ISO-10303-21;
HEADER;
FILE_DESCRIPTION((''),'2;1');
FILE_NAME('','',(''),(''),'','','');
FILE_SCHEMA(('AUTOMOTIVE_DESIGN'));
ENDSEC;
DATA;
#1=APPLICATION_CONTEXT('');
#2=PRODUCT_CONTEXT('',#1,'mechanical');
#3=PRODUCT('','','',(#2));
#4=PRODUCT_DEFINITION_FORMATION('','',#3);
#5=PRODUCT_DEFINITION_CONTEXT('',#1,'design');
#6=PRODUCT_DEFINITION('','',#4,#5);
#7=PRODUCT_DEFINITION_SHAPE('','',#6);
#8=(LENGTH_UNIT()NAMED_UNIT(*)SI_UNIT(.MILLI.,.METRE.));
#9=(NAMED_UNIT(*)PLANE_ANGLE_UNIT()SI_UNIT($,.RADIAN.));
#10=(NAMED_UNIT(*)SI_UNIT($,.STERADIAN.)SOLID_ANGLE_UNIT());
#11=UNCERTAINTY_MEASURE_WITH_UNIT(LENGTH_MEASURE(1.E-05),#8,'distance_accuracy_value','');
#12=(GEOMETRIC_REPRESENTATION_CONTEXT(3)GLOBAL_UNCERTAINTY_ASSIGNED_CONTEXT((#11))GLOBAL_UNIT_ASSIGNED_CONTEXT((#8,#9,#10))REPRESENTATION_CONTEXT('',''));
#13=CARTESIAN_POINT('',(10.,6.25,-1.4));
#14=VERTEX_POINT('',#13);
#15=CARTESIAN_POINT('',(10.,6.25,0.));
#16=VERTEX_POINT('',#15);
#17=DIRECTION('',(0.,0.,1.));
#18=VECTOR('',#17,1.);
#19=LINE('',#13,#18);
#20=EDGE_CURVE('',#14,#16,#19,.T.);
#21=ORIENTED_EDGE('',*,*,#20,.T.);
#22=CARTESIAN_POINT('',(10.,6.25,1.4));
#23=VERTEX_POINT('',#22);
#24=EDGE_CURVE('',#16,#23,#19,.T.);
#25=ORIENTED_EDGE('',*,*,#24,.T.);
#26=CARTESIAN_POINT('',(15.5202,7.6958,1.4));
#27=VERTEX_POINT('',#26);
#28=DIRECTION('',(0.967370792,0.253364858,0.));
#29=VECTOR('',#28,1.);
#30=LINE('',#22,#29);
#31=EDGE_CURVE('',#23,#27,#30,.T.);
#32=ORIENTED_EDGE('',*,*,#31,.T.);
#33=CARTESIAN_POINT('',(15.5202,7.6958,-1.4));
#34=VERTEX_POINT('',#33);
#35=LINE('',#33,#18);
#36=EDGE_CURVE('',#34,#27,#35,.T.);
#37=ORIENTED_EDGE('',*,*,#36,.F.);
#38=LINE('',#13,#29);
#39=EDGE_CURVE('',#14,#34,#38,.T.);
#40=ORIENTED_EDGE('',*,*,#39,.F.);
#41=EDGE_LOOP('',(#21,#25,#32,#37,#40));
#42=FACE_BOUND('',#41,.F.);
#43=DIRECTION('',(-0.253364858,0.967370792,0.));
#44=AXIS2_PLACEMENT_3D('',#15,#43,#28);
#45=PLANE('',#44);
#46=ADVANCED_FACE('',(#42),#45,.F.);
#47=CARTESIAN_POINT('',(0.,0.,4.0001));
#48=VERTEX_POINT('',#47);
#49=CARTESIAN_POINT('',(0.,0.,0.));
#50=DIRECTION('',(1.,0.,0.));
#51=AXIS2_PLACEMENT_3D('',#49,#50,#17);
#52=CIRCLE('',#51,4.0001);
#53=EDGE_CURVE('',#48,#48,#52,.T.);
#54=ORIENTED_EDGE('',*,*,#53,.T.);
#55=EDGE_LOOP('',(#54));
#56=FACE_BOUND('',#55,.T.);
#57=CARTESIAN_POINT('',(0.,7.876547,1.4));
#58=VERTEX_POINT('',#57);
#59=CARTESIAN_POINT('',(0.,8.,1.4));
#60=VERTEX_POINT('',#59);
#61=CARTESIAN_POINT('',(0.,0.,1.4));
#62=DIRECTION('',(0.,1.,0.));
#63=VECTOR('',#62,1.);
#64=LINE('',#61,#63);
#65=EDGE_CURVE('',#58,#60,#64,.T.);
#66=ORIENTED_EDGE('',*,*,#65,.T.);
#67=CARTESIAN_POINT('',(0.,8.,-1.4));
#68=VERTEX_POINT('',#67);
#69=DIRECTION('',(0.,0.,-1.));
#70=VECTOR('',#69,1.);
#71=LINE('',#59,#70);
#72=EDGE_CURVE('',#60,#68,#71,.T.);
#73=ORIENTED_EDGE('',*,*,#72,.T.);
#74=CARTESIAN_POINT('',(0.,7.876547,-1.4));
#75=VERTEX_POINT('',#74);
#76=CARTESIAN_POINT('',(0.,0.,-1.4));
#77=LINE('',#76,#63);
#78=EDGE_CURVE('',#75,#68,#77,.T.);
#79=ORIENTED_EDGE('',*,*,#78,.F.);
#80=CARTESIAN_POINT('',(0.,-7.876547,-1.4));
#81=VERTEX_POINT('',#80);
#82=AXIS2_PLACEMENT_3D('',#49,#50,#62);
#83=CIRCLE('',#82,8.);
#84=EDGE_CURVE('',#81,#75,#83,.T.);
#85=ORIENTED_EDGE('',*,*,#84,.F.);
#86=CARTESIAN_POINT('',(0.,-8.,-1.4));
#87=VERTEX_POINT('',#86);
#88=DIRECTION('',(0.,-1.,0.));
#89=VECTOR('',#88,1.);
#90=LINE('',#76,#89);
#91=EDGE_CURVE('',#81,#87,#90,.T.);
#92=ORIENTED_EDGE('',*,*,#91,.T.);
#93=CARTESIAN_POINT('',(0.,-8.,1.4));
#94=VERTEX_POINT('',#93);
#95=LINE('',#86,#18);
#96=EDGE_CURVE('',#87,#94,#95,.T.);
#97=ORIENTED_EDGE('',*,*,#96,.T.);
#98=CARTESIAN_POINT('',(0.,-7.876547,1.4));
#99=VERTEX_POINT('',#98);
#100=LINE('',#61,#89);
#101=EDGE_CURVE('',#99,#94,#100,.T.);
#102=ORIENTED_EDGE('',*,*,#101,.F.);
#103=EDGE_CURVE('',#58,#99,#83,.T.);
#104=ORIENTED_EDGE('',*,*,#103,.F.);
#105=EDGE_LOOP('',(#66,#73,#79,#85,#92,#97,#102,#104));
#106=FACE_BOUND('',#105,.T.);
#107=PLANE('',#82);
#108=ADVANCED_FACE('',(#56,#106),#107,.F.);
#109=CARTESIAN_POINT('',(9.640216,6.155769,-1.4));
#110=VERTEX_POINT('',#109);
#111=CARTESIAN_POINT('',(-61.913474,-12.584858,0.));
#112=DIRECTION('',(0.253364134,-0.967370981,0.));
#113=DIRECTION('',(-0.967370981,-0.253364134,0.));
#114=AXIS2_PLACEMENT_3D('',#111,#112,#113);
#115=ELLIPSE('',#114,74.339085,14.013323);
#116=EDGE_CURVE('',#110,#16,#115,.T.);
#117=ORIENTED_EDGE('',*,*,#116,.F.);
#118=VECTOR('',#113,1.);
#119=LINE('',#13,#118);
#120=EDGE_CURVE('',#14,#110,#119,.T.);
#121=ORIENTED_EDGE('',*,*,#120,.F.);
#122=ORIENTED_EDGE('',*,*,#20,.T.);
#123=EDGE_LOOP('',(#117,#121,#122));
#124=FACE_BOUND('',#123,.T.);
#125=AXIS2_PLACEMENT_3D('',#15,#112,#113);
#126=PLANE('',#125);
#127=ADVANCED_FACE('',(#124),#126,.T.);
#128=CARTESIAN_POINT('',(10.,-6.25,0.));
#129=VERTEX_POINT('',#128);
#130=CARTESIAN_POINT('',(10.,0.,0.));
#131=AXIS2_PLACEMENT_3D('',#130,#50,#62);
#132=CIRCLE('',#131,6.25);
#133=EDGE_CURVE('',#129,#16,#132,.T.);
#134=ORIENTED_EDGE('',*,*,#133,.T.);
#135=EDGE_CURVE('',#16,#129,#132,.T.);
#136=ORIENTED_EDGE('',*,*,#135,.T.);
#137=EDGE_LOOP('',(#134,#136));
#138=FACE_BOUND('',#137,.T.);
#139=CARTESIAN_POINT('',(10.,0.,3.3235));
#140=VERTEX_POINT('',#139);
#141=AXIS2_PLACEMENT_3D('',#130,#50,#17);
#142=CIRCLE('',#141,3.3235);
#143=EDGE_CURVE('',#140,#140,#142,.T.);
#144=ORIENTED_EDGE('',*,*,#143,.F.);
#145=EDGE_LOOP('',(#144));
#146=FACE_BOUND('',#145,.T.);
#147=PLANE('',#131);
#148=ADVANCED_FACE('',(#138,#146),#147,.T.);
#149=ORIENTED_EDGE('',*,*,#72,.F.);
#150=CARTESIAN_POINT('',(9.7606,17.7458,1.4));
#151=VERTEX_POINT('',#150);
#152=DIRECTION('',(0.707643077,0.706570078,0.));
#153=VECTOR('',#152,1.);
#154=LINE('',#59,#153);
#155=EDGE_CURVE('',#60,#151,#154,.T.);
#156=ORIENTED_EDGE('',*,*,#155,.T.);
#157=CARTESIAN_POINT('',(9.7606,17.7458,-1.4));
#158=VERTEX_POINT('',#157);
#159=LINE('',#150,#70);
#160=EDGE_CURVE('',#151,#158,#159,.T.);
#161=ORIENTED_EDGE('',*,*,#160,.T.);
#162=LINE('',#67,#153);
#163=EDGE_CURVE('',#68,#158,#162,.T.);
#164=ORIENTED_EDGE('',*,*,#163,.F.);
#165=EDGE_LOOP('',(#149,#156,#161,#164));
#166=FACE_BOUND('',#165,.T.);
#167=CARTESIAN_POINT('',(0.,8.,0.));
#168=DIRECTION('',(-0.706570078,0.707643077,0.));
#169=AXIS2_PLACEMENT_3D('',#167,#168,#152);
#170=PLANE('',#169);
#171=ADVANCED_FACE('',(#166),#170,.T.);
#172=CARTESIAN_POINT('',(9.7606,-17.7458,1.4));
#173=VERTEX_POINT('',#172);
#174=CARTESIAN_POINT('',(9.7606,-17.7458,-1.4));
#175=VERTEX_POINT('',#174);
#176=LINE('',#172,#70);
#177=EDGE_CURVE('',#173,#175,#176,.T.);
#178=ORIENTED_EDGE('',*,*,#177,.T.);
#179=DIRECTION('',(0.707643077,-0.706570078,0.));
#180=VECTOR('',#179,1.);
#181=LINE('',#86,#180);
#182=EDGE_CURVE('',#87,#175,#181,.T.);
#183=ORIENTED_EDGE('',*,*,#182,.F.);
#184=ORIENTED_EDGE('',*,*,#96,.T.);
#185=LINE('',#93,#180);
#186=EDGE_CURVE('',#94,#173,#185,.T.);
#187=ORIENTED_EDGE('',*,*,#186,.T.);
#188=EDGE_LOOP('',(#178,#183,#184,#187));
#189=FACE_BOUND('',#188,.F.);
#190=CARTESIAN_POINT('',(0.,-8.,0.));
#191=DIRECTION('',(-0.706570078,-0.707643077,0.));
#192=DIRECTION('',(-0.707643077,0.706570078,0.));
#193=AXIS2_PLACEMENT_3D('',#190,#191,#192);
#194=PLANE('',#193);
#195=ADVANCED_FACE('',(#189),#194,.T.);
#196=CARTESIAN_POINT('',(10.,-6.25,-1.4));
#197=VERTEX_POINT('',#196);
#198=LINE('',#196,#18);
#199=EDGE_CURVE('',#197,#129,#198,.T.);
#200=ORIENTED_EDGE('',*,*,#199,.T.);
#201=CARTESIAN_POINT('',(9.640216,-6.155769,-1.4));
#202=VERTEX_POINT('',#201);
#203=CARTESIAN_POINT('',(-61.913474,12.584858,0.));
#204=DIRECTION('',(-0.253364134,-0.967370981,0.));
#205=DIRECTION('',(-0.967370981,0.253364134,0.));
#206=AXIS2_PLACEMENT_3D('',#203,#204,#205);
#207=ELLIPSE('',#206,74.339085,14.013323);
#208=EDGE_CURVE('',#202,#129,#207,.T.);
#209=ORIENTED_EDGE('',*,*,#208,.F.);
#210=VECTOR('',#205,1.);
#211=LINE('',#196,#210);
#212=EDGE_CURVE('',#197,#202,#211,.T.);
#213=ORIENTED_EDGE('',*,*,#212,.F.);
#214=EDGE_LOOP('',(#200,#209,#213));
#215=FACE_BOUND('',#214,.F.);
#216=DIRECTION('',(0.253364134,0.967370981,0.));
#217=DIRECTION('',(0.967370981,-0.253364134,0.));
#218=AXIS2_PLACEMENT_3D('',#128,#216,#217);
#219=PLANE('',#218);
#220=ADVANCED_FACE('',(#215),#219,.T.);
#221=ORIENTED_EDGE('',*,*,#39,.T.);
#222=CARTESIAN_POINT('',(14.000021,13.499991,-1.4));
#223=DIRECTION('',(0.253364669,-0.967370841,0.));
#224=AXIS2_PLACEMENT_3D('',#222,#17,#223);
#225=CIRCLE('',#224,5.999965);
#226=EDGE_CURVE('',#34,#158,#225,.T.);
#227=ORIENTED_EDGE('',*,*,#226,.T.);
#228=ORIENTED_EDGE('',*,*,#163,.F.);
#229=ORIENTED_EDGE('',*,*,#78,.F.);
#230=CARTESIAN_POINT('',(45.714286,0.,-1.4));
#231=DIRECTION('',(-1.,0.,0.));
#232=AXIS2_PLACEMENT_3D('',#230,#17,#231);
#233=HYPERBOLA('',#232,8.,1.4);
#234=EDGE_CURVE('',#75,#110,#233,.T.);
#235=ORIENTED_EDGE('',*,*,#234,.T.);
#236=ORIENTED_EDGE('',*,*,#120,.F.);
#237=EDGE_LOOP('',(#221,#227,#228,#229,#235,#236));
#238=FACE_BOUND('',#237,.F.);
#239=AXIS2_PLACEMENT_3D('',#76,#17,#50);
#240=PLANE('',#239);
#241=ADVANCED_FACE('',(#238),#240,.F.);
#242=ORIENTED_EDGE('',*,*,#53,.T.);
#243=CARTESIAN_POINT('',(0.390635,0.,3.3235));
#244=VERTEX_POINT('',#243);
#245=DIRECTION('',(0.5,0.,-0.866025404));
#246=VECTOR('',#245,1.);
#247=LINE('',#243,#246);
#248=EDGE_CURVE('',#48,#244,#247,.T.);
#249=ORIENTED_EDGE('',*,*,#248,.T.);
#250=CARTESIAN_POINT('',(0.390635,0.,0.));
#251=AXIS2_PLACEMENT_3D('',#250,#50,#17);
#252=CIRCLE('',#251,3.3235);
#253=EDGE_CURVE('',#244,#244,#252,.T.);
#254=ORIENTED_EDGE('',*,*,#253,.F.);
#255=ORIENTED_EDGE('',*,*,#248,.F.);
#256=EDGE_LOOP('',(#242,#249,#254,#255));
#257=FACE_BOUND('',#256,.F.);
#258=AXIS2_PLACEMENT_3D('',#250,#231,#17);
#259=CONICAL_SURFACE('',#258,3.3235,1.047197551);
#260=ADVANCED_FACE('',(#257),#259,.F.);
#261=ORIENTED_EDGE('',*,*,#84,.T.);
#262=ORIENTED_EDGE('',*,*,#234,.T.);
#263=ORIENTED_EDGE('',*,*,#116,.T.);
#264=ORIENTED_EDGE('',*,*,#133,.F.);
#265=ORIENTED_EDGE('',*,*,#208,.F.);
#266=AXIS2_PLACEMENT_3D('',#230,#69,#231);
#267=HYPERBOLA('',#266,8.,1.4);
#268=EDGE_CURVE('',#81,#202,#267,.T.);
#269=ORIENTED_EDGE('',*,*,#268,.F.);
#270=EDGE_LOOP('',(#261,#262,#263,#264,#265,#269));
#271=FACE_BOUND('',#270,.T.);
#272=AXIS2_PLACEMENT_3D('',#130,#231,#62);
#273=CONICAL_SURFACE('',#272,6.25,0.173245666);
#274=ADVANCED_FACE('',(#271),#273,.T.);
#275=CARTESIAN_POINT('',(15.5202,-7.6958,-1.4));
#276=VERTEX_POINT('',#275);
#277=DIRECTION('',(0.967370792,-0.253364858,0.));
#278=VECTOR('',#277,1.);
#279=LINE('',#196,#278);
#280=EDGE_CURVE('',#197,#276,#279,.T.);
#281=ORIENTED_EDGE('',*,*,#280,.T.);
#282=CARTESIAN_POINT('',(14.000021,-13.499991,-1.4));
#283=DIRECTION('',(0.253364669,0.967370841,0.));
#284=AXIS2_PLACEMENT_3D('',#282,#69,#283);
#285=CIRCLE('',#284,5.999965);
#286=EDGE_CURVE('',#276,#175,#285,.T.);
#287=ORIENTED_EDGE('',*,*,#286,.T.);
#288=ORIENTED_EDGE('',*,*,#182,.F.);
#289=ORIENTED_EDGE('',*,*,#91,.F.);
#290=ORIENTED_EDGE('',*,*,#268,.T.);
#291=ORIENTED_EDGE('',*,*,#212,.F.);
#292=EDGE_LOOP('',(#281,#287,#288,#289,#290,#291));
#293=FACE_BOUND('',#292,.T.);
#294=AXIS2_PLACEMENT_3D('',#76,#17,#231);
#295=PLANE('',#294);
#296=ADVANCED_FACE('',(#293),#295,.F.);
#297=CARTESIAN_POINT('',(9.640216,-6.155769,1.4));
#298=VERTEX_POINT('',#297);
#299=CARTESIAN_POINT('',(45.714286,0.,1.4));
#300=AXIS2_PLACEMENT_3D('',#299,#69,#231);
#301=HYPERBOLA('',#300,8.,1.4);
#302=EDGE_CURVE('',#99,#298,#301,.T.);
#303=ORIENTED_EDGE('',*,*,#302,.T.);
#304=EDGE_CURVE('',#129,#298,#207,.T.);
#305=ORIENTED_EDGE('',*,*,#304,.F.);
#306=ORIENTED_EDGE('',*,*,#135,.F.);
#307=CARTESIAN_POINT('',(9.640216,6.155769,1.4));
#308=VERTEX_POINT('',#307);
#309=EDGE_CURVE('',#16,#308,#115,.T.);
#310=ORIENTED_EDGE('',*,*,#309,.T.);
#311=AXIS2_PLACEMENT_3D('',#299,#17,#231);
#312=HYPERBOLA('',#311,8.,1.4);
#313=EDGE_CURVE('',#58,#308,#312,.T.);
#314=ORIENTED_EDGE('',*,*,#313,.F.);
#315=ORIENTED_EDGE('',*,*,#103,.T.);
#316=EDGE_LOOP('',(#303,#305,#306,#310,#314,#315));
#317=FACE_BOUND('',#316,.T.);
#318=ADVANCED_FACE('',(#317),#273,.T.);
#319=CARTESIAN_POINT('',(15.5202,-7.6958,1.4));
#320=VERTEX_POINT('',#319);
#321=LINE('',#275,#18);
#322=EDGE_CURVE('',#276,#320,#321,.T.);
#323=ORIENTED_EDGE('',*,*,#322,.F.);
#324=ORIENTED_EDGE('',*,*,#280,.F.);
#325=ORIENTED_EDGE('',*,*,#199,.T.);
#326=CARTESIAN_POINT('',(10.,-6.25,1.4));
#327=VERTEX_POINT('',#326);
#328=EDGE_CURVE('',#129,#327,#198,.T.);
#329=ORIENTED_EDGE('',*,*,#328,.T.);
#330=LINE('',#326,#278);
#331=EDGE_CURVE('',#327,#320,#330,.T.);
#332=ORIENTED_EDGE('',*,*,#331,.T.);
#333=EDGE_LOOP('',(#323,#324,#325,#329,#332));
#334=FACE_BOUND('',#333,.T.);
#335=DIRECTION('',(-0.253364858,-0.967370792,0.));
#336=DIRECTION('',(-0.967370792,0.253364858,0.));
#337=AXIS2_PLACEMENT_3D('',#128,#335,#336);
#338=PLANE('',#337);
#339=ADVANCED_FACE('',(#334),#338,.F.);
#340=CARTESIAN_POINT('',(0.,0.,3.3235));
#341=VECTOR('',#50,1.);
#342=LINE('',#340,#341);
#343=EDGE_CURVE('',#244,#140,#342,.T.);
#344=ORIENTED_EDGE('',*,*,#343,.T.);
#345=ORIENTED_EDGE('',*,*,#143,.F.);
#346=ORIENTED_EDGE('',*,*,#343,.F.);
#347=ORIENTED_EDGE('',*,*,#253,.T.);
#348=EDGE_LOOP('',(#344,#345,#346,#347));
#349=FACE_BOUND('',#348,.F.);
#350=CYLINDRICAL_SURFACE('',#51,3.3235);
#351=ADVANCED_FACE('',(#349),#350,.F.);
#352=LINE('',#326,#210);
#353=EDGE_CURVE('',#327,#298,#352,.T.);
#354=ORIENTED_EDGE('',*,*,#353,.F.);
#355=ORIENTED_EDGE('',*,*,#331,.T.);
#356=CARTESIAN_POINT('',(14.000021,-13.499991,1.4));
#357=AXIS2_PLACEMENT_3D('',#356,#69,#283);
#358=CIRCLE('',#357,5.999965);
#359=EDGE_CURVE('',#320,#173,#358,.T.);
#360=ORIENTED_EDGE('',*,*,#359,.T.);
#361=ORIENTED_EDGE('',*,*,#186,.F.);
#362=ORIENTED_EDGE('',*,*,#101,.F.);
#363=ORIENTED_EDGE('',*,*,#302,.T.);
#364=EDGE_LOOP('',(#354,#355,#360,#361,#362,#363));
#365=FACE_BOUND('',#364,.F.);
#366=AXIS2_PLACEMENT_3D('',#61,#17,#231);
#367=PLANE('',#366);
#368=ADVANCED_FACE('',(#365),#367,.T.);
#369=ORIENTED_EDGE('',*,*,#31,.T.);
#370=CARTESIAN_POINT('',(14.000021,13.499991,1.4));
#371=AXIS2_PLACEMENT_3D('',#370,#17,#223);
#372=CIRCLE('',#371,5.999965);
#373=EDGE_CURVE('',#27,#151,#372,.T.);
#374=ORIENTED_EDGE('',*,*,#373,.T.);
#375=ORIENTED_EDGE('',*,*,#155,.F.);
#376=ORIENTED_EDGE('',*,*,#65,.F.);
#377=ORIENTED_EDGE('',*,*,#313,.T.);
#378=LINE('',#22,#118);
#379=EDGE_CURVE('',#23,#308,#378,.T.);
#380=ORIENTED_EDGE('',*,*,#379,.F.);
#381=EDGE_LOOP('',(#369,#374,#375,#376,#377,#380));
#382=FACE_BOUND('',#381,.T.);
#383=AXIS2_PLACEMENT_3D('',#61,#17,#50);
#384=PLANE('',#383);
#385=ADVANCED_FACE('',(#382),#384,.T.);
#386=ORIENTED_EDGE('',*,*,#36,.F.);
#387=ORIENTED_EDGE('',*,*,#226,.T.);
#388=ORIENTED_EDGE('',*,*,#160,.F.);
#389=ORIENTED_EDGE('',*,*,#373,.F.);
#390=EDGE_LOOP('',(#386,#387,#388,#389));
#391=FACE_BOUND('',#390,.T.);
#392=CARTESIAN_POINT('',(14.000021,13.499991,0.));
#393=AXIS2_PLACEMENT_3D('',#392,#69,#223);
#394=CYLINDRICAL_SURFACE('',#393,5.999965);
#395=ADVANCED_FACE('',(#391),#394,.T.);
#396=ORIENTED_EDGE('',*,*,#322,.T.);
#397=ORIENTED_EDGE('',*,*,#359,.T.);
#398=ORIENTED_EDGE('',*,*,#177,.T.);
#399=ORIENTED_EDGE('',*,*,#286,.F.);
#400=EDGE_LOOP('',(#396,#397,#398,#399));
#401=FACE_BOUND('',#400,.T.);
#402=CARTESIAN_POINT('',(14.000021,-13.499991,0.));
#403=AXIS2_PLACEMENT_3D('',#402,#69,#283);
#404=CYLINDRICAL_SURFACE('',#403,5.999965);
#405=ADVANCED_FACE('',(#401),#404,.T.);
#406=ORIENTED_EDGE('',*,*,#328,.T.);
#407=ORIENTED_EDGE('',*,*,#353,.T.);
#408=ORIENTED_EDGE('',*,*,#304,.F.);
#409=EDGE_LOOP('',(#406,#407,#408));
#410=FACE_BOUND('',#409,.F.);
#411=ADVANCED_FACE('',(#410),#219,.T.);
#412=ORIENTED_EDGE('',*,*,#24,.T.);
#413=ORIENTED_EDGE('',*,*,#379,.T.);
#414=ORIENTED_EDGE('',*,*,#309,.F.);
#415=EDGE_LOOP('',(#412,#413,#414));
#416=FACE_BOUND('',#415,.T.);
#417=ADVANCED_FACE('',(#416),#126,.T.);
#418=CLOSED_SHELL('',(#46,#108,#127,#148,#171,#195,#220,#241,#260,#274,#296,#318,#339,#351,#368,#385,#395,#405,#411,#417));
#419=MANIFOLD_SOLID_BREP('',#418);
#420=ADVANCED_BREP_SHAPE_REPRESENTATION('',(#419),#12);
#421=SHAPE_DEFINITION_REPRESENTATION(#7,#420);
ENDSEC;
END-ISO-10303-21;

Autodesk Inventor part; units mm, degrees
ref_plane "YZ Plane" through (0, 0, 0) normal (1, 0, 0) x (0, 1, 0)
ref_plane "XZ Plane" through (0, 0, 0) normal (0, 1, 0) x (-1, 0, 0)
sketch "Sketch1" plane through (0, 0, 0) normal (0, 0, 1) x (1, 0, 0)
  line L0 (0, 0) -> (10, 0)
  line L1 (0, 0) -> (0, 8)
  line L2 (10, 6.25) -> (10, 0)
  line L3 (0, 8) -> (9.7606, 17.7458)
  line L4 (10, 6.25) -> (15.5202, 7.6958)
  arc A0 (15.5202, 7.6958) -> (9.7606, 17.7458) centre (14, 13.5) ccw
  line L5 (10, 6.25) -> (0, 8)
  line L6 (10, 6.25) -> (0, 3.6309)
  dimension "d0" = 12.5
  dimension "d1" = 14
  dimension "d2" = 13.5
  dimension "d3" = 6
  dimension "d4" = 10
  dimension "d5" = 16
revolve "Body" add sketch "Sketch1" angle 360 about axis through (0, 0, 0) along (1, 0, 0) contours L1 L6 L2 L0 | L1 L5 L6
extrude "Wing1" add sketch "Sketch1" along normal mid plane 2.8 contours L1 L5 L6 | L5 L3 A0 L4
fillet "Fillet1" [suppressed]
mirror "Wing2" about plane through (0, 0, 0) normal (0, 1, 0) of "Wing1"
sketch "Sketch2" plane through (0, 0, 0) normal (1, 0, 0) x (0, 1, 0)
  line L0 (0, -14) -> (0, 14) projected
  line L1 (-14, 0) -> (14, 0) projected
  point P0 (0, 0)
hole "Thread" at (0, 0, 0) direction (1, 0, 0) diameter 6.647 end through all thread size "M8x1.25" class "6H" standard "ISO Metric profile"
chamfer "Chamfer1" distance 0.6766 angle 30 1 edges at (0, 0, -3.3235) measured on face at (0, -6.3508, -0.1335)
ref_plane "Work Plane1" through (46.6583, 0, 0) normal (0, 0, -1) x (1, 0, 0)
equation "\"d0\" = KOD2"
equation "\"d1\" = KOH1 - RR"
equation "\"d2\" = 0.5 * E0 - RR"
equation "\"d3\" = RR"
equation "\"d4\" = KOH"
equation "\"d5\" = KOD"
equation "\"d6\" = SW"
equation "\"d8\" = 0.333333 * SW"
equation "\"d9\" = -0.5 * GD1 + 0.5 * NND"
equation "\"d109\" = -0.5 * GD1 + 0.5 * NND"
equation "\"NND\" = 8"
equation "\"KOH\" = 10"
equation "\"KOH1\" = 20"
equation "\"SW\" = 2.8"
equation "\"KOD\" = 16"
equation "\"KOD2\" = 12.5"
equation "\"RR\" = 6"
equation "\"E0\" = 39"
equation "\"GUL\" = 0.541266 * PTC"
equation "\"BOR\" = 0"
equation "\"PTC\" = 1.25"
equation "\"THREADDIA\" = 8"
equation "\"TOA\" = 30deg"
equation "\"RR2\" = 3"
equation "\"SW1\" = 4.4"
equation "\"GAL\" = 0.541266 * PTC"
equation "\"GD1\" = 6.646835"
properties part number "DIN 315 - M8" material "Steel, Mild"
